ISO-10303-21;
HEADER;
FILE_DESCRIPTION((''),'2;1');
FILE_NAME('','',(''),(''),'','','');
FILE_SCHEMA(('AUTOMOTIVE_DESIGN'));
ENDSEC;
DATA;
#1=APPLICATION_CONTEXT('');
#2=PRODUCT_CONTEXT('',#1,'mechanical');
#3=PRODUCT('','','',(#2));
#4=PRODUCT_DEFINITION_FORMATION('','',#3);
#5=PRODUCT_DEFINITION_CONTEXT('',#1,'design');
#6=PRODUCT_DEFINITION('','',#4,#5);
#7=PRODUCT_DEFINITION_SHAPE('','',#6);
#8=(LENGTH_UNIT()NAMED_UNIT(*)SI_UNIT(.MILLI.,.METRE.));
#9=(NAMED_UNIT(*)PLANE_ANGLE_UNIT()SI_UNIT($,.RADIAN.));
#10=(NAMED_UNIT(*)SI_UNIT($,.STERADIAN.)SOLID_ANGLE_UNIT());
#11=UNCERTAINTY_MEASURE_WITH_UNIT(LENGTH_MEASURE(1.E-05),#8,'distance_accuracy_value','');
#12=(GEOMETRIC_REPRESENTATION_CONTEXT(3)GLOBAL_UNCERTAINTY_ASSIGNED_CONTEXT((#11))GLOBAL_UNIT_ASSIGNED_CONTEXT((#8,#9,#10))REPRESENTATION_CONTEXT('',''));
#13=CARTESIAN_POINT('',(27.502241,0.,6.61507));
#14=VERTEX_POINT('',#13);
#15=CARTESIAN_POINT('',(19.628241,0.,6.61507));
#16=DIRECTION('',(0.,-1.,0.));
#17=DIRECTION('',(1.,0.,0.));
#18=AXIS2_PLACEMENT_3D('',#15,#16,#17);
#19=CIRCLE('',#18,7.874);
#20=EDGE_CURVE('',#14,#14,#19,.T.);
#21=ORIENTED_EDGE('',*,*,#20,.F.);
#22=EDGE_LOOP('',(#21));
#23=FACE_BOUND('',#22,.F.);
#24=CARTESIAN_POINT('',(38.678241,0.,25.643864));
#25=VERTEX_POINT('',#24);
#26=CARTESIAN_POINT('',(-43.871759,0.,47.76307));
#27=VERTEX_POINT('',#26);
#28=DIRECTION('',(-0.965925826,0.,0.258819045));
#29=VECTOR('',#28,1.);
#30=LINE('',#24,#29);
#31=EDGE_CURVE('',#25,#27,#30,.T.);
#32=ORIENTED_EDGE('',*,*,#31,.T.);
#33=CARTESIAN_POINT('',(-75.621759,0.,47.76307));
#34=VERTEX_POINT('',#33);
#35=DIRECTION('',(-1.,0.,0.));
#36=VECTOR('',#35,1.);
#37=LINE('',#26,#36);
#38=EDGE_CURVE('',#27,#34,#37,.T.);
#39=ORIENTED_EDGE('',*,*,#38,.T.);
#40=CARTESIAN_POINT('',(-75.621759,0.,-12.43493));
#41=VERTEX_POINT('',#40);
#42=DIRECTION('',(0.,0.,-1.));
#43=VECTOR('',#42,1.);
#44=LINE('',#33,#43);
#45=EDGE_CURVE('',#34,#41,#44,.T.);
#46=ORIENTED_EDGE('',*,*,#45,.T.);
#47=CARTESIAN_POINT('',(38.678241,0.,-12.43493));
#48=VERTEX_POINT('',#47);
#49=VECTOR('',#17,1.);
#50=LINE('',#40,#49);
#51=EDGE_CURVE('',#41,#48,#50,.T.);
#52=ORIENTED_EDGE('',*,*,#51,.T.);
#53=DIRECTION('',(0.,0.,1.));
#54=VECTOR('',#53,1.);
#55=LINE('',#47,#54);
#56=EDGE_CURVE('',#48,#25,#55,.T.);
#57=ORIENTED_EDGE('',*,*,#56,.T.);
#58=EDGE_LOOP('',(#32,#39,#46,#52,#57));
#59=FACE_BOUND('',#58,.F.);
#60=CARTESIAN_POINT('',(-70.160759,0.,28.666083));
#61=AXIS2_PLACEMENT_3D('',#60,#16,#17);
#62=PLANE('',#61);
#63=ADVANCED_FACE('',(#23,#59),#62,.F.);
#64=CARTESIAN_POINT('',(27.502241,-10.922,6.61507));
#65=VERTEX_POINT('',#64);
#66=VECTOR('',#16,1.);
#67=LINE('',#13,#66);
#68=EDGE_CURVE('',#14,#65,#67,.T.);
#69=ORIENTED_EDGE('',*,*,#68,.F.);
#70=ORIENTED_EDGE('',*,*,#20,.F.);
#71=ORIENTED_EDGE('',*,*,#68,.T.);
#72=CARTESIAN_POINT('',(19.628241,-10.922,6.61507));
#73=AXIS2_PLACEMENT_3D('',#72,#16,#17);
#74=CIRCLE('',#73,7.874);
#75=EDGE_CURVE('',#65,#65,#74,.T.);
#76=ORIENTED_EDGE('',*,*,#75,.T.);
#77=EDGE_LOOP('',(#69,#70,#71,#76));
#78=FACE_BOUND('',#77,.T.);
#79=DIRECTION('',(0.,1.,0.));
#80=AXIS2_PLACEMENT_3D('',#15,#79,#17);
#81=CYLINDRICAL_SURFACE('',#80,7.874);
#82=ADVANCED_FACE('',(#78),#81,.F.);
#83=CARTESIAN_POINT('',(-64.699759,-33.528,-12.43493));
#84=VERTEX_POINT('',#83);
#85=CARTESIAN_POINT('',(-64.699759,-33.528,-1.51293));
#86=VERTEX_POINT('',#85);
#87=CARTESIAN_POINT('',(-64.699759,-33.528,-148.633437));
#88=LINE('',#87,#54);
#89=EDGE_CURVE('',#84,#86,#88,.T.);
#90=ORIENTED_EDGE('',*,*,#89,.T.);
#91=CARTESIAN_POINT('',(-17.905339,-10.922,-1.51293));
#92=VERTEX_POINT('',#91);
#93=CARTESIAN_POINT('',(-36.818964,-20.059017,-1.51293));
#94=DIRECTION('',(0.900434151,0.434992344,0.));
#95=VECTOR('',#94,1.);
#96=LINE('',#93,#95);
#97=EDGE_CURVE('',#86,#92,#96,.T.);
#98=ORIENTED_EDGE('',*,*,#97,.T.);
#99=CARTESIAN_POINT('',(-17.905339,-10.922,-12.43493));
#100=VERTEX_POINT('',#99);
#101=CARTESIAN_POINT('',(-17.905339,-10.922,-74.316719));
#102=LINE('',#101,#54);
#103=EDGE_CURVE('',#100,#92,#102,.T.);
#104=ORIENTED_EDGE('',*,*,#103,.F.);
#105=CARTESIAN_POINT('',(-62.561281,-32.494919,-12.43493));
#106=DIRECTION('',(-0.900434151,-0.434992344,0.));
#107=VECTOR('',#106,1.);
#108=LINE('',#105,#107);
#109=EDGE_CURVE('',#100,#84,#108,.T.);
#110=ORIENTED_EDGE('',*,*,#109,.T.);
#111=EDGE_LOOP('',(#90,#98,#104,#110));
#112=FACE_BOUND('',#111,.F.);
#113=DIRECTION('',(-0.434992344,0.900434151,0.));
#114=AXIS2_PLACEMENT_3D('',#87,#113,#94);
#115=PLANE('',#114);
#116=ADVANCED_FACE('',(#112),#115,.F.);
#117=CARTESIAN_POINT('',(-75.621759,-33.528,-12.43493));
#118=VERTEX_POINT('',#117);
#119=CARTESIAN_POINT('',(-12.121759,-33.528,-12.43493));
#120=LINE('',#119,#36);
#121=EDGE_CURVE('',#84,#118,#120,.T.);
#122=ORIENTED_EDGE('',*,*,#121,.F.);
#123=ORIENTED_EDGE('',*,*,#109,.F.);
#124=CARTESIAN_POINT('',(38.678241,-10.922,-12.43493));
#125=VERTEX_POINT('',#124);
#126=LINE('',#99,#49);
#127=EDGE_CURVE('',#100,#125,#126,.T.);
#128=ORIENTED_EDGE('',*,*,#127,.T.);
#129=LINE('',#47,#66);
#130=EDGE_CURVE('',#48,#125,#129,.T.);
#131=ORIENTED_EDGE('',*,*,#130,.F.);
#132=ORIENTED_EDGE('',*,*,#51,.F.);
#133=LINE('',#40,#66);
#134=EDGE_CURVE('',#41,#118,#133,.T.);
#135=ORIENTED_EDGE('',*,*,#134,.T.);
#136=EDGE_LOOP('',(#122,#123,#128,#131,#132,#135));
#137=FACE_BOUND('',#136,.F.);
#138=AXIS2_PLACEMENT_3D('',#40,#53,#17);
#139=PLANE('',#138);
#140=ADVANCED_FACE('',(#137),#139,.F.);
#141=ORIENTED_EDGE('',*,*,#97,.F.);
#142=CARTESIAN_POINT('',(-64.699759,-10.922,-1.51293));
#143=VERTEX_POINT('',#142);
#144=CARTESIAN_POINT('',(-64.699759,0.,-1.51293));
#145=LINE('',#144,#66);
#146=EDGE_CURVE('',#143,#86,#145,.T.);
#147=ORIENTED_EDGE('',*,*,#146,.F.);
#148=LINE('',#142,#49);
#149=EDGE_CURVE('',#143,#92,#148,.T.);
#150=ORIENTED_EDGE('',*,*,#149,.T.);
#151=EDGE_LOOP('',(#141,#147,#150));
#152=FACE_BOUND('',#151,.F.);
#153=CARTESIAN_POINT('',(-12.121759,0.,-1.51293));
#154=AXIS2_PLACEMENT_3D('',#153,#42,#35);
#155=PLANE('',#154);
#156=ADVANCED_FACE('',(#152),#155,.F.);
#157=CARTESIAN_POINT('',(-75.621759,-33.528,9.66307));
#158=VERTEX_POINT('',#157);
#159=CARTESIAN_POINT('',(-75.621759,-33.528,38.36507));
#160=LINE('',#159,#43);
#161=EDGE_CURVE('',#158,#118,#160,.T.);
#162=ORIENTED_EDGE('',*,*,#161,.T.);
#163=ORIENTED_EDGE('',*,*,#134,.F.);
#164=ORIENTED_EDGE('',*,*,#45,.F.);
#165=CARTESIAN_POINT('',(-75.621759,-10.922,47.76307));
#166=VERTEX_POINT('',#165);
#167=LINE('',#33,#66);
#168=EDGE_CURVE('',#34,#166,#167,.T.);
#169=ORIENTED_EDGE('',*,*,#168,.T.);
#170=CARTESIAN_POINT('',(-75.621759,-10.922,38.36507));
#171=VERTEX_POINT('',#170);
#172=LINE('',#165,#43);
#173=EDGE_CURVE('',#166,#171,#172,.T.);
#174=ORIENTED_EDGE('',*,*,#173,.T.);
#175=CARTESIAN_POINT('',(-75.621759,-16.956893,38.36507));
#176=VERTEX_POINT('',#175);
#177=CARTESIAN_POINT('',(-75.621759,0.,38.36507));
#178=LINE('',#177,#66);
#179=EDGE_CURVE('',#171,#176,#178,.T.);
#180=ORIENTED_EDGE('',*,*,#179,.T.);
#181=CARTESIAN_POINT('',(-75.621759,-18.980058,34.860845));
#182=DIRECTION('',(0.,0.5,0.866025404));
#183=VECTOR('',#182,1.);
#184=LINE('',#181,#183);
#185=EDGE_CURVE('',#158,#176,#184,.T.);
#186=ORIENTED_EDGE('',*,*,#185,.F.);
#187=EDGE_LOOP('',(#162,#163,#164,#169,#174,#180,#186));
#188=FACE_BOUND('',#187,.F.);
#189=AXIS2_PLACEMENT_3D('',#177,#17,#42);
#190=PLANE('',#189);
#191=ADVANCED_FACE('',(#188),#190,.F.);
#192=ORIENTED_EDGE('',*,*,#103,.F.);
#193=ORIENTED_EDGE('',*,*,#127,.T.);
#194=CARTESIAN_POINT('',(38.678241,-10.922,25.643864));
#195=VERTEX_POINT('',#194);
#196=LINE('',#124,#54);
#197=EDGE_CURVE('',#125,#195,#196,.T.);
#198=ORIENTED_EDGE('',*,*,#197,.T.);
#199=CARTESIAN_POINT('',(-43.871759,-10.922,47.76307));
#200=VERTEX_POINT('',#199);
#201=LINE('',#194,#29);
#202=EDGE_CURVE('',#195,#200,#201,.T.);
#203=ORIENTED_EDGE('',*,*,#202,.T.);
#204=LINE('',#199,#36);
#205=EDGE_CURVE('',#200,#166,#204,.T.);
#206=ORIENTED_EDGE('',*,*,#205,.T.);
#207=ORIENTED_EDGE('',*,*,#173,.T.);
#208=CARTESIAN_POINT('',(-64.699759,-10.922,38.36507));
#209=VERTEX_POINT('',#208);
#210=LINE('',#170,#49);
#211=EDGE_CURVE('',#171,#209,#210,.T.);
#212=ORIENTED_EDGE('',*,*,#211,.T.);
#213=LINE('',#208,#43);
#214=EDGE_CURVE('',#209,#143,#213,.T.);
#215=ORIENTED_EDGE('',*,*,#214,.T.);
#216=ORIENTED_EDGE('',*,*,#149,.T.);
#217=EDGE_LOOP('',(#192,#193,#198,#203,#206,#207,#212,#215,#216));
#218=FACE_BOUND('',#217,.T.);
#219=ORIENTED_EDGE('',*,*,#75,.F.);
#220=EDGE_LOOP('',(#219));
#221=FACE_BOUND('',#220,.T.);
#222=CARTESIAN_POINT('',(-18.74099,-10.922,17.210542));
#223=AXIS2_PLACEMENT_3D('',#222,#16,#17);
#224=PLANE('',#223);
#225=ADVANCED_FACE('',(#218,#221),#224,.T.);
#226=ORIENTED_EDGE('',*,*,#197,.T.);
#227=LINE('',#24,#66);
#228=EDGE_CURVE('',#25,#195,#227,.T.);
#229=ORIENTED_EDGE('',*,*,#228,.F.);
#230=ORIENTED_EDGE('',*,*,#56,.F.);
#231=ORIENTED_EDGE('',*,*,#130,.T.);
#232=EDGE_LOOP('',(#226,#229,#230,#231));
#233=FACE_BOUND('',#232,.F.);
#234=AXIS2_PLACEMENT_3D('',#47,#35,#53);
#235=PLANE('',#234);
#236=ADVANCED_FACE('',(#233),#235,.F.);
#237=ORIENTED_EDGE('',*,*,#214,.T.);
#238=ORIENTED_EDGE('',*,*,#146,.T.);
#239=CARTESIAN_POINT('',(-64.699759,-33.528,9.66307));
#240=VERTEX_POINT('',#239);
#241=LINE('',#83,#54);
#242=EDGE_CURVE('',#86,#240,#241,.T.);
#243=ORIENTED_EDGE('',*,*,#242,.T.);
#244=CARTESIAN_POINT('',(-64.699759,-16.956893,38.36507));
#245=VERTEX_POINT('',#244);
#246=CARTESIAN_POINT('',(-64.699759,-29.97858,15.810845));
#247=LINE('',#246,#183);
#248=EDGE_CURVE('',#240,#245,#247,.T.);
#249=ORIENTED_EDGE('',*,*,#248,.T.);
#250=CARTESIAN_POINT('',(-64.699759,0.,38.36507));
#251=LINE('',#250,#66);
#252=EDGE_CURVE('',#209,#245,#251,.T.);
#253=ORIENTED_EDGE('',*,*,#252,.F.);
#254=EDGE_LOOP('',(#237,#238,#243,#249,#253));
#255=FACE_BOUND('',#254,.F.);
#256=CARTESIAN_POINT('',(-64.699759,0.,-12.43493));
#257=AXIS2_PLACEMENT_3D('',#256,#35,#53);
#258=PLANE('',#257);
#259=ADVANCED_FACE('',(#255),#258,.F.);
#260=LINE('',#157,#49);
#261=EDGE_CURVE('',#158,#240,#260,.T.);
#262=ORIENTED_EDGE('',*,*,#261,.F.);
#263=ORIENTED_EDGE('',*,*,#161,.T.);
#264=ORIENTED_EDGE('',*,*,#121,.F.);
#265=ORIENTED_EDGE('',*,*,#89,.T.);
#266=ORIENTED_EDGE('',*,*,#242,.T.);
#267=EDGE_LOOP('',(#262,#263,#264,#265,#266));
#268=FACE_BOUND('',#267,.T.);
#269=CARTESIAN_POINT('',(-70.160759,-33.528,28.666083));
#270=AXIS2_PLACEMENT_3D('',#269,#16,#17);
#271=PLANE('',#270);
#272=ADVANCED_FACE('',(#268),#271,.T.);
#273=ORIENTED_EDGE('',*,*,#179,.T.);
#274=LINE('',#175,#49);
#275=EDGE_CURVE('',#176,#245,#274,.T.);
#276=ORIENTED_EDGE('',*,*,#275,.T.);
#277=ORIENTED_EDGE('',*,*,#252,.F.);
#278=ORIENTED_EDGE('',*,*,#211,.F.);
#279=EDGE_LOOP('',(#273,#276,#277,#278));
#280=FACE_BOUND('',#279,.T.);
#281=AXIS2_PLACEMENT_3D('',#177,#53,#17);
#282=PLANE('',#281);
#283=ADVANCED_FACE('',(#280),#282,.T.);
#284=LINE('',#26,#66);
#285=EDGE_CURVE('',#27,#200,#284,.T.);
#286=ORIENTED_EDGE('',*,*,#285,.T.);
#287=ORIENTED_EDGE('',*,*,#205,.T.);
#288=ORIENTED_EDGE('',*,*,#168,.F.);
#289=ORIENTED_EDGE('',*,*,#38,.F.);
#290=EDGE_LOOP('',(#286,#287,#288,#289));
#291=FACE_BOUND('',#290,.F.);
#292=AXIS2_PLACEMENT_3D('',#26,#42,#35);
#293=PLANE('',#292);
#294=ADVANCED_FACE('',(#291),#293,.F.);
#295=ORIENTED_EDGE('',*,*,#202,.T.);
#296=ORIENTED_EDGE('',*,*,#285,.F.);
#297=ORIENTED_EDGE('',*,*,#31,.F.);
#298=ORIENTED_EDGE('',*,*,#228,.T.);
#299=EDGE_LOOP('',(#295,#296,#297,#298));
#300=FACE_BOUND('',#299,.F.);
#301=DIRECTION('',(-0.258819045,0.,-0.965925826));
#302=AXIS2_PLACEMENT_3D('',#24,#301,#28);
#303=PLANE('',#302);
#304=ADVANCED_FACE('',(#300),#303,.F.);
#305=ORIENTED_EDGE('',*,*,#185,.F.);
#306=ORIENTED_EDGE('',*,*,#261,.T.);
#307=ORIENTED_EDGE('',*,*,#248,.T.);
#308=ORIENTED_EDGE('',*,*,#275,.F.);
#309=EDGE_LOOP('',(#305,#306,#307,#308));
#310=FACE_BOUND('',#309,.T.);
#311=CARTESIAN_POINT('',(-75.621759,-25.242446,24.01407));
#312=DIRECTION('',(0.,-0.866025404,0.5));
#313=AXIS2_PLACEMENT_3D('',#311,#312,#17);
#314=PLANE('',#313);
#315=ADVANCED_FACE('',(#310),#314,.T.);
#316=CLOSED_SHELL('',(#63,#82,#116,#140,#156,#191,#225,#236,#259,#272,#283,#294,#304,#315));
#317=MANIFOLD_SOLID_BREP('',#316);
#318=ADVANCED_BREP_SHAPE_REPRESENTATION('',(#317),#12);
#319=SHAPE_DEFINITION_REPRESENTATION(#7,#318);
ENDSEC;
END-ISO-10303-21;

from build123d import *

# Parameters (mm, degrees)
F0_R        = 7.874
F1_DEPTH    = 10.922
F2_DEPTH    = 33.528
F0_W        = 10.922
F0_H        = 19.3979742137
F3_DEPTH    = 33.528
F4_SIZE2    = 16.5711074263
F4_SIZE     = 28.702
F5_T4_DEPTH = 283.3190140635


# Not quite as in the source:
# - a fillet or chamfer that OpenCascade refuses, or shapes differently, is made with other operations: its cross-section is extruded or revolved along the edge and cut away or added


with BuildPart() as f1:
    # F0 (on Front) → F1 (new body)
    with BuildSketch(Plane.XZ):
        Polygon((-43.8717590123, 47.7630699762), (-75.6217590123, 47.7630699762), (-75.6217590123, 38.3650699762), (-64.6997590123, 38.3650699762), (-64.6997590123, 18.9670957625), (-64.6997590123, -1.5129300238), (-12.1217590123, -1.5129300238), (-12.1217590123, -12.4349300238), (38.6782409877, -12.4349300238), (38.6782409877, 25.643864141), align=None)
        with Locations((19.6282409877, 6.6150699762)):
            Circle(F0_R, mode=Mode.SUBTRACT)
    extrude(amount=F1_DEPTH)

    # F0 (on Front) → F2 (join)
    with BuildSketch(Plane.XZ):
        Polygon((-43.8717590123, -12.4349300238), (-12.1217590123, -12.4349300238), (-12.1217590123, -1.5129300238), (-64.6997590123, -1.5129300238), (-64.6997590123, -12.4349300238), align=None)
    extrude(amount=F2_DEPTH)

    # F0 (on Front) → F3 (join)
    with BuildSketch(Plane.XZ):
        with Locations((-70.1607590123, 28.6660828693)):
            Rectangle(F0_W, F0_H)
        Polygon((-64.6997590123, 18.9670957625), (-75.6217590123, 18.9670957625), (-75.6217590123, -12.4349300238), (-64.6997590123, -12.4349300238), (-64.6997590123, -1.5129300238), align=None)
    extrude(amount=F3_DEPTH)

    # F4
    f4_edges = [f1.edges().sort_by_distance(p)[0] for p in [
        (-70.160759, -33.528, 38.36507),
    ]]
    f4_side = f1.faces().sort_by_distance((-70.160759, -33.528, 37.551873))[0]
    chamfer(f4_edges, length=F4_SIZE, length2=F4_SIZE2, reference=f4_side)

    # F5: chamfer of 25.4 x 52.578 on 1 edges, made by hand


with BuildPart() as f5_tool2:
    # F5_s3 → F5_t4 (new body)
    with BuildSketch(Plane.XY.offset(-148.6334370556)):
        Polygon((-64.6997590123, -33.528), (-12.1217590123, -8.128), (-12.1217590123, -33.528), align=None)
    extrude(amount=F5_T4_DEPTH)

    split(bisect_by=Plane.XZ.offset(10.922), keep=Keep.TOP)


with BuildPart() as f1_1:
    add(f1.part)

    # F5_t1: cut F5_tool2
    add(f5_tool2.part, mode=Mode.SUBTRACT)


solid = f1_1.part
